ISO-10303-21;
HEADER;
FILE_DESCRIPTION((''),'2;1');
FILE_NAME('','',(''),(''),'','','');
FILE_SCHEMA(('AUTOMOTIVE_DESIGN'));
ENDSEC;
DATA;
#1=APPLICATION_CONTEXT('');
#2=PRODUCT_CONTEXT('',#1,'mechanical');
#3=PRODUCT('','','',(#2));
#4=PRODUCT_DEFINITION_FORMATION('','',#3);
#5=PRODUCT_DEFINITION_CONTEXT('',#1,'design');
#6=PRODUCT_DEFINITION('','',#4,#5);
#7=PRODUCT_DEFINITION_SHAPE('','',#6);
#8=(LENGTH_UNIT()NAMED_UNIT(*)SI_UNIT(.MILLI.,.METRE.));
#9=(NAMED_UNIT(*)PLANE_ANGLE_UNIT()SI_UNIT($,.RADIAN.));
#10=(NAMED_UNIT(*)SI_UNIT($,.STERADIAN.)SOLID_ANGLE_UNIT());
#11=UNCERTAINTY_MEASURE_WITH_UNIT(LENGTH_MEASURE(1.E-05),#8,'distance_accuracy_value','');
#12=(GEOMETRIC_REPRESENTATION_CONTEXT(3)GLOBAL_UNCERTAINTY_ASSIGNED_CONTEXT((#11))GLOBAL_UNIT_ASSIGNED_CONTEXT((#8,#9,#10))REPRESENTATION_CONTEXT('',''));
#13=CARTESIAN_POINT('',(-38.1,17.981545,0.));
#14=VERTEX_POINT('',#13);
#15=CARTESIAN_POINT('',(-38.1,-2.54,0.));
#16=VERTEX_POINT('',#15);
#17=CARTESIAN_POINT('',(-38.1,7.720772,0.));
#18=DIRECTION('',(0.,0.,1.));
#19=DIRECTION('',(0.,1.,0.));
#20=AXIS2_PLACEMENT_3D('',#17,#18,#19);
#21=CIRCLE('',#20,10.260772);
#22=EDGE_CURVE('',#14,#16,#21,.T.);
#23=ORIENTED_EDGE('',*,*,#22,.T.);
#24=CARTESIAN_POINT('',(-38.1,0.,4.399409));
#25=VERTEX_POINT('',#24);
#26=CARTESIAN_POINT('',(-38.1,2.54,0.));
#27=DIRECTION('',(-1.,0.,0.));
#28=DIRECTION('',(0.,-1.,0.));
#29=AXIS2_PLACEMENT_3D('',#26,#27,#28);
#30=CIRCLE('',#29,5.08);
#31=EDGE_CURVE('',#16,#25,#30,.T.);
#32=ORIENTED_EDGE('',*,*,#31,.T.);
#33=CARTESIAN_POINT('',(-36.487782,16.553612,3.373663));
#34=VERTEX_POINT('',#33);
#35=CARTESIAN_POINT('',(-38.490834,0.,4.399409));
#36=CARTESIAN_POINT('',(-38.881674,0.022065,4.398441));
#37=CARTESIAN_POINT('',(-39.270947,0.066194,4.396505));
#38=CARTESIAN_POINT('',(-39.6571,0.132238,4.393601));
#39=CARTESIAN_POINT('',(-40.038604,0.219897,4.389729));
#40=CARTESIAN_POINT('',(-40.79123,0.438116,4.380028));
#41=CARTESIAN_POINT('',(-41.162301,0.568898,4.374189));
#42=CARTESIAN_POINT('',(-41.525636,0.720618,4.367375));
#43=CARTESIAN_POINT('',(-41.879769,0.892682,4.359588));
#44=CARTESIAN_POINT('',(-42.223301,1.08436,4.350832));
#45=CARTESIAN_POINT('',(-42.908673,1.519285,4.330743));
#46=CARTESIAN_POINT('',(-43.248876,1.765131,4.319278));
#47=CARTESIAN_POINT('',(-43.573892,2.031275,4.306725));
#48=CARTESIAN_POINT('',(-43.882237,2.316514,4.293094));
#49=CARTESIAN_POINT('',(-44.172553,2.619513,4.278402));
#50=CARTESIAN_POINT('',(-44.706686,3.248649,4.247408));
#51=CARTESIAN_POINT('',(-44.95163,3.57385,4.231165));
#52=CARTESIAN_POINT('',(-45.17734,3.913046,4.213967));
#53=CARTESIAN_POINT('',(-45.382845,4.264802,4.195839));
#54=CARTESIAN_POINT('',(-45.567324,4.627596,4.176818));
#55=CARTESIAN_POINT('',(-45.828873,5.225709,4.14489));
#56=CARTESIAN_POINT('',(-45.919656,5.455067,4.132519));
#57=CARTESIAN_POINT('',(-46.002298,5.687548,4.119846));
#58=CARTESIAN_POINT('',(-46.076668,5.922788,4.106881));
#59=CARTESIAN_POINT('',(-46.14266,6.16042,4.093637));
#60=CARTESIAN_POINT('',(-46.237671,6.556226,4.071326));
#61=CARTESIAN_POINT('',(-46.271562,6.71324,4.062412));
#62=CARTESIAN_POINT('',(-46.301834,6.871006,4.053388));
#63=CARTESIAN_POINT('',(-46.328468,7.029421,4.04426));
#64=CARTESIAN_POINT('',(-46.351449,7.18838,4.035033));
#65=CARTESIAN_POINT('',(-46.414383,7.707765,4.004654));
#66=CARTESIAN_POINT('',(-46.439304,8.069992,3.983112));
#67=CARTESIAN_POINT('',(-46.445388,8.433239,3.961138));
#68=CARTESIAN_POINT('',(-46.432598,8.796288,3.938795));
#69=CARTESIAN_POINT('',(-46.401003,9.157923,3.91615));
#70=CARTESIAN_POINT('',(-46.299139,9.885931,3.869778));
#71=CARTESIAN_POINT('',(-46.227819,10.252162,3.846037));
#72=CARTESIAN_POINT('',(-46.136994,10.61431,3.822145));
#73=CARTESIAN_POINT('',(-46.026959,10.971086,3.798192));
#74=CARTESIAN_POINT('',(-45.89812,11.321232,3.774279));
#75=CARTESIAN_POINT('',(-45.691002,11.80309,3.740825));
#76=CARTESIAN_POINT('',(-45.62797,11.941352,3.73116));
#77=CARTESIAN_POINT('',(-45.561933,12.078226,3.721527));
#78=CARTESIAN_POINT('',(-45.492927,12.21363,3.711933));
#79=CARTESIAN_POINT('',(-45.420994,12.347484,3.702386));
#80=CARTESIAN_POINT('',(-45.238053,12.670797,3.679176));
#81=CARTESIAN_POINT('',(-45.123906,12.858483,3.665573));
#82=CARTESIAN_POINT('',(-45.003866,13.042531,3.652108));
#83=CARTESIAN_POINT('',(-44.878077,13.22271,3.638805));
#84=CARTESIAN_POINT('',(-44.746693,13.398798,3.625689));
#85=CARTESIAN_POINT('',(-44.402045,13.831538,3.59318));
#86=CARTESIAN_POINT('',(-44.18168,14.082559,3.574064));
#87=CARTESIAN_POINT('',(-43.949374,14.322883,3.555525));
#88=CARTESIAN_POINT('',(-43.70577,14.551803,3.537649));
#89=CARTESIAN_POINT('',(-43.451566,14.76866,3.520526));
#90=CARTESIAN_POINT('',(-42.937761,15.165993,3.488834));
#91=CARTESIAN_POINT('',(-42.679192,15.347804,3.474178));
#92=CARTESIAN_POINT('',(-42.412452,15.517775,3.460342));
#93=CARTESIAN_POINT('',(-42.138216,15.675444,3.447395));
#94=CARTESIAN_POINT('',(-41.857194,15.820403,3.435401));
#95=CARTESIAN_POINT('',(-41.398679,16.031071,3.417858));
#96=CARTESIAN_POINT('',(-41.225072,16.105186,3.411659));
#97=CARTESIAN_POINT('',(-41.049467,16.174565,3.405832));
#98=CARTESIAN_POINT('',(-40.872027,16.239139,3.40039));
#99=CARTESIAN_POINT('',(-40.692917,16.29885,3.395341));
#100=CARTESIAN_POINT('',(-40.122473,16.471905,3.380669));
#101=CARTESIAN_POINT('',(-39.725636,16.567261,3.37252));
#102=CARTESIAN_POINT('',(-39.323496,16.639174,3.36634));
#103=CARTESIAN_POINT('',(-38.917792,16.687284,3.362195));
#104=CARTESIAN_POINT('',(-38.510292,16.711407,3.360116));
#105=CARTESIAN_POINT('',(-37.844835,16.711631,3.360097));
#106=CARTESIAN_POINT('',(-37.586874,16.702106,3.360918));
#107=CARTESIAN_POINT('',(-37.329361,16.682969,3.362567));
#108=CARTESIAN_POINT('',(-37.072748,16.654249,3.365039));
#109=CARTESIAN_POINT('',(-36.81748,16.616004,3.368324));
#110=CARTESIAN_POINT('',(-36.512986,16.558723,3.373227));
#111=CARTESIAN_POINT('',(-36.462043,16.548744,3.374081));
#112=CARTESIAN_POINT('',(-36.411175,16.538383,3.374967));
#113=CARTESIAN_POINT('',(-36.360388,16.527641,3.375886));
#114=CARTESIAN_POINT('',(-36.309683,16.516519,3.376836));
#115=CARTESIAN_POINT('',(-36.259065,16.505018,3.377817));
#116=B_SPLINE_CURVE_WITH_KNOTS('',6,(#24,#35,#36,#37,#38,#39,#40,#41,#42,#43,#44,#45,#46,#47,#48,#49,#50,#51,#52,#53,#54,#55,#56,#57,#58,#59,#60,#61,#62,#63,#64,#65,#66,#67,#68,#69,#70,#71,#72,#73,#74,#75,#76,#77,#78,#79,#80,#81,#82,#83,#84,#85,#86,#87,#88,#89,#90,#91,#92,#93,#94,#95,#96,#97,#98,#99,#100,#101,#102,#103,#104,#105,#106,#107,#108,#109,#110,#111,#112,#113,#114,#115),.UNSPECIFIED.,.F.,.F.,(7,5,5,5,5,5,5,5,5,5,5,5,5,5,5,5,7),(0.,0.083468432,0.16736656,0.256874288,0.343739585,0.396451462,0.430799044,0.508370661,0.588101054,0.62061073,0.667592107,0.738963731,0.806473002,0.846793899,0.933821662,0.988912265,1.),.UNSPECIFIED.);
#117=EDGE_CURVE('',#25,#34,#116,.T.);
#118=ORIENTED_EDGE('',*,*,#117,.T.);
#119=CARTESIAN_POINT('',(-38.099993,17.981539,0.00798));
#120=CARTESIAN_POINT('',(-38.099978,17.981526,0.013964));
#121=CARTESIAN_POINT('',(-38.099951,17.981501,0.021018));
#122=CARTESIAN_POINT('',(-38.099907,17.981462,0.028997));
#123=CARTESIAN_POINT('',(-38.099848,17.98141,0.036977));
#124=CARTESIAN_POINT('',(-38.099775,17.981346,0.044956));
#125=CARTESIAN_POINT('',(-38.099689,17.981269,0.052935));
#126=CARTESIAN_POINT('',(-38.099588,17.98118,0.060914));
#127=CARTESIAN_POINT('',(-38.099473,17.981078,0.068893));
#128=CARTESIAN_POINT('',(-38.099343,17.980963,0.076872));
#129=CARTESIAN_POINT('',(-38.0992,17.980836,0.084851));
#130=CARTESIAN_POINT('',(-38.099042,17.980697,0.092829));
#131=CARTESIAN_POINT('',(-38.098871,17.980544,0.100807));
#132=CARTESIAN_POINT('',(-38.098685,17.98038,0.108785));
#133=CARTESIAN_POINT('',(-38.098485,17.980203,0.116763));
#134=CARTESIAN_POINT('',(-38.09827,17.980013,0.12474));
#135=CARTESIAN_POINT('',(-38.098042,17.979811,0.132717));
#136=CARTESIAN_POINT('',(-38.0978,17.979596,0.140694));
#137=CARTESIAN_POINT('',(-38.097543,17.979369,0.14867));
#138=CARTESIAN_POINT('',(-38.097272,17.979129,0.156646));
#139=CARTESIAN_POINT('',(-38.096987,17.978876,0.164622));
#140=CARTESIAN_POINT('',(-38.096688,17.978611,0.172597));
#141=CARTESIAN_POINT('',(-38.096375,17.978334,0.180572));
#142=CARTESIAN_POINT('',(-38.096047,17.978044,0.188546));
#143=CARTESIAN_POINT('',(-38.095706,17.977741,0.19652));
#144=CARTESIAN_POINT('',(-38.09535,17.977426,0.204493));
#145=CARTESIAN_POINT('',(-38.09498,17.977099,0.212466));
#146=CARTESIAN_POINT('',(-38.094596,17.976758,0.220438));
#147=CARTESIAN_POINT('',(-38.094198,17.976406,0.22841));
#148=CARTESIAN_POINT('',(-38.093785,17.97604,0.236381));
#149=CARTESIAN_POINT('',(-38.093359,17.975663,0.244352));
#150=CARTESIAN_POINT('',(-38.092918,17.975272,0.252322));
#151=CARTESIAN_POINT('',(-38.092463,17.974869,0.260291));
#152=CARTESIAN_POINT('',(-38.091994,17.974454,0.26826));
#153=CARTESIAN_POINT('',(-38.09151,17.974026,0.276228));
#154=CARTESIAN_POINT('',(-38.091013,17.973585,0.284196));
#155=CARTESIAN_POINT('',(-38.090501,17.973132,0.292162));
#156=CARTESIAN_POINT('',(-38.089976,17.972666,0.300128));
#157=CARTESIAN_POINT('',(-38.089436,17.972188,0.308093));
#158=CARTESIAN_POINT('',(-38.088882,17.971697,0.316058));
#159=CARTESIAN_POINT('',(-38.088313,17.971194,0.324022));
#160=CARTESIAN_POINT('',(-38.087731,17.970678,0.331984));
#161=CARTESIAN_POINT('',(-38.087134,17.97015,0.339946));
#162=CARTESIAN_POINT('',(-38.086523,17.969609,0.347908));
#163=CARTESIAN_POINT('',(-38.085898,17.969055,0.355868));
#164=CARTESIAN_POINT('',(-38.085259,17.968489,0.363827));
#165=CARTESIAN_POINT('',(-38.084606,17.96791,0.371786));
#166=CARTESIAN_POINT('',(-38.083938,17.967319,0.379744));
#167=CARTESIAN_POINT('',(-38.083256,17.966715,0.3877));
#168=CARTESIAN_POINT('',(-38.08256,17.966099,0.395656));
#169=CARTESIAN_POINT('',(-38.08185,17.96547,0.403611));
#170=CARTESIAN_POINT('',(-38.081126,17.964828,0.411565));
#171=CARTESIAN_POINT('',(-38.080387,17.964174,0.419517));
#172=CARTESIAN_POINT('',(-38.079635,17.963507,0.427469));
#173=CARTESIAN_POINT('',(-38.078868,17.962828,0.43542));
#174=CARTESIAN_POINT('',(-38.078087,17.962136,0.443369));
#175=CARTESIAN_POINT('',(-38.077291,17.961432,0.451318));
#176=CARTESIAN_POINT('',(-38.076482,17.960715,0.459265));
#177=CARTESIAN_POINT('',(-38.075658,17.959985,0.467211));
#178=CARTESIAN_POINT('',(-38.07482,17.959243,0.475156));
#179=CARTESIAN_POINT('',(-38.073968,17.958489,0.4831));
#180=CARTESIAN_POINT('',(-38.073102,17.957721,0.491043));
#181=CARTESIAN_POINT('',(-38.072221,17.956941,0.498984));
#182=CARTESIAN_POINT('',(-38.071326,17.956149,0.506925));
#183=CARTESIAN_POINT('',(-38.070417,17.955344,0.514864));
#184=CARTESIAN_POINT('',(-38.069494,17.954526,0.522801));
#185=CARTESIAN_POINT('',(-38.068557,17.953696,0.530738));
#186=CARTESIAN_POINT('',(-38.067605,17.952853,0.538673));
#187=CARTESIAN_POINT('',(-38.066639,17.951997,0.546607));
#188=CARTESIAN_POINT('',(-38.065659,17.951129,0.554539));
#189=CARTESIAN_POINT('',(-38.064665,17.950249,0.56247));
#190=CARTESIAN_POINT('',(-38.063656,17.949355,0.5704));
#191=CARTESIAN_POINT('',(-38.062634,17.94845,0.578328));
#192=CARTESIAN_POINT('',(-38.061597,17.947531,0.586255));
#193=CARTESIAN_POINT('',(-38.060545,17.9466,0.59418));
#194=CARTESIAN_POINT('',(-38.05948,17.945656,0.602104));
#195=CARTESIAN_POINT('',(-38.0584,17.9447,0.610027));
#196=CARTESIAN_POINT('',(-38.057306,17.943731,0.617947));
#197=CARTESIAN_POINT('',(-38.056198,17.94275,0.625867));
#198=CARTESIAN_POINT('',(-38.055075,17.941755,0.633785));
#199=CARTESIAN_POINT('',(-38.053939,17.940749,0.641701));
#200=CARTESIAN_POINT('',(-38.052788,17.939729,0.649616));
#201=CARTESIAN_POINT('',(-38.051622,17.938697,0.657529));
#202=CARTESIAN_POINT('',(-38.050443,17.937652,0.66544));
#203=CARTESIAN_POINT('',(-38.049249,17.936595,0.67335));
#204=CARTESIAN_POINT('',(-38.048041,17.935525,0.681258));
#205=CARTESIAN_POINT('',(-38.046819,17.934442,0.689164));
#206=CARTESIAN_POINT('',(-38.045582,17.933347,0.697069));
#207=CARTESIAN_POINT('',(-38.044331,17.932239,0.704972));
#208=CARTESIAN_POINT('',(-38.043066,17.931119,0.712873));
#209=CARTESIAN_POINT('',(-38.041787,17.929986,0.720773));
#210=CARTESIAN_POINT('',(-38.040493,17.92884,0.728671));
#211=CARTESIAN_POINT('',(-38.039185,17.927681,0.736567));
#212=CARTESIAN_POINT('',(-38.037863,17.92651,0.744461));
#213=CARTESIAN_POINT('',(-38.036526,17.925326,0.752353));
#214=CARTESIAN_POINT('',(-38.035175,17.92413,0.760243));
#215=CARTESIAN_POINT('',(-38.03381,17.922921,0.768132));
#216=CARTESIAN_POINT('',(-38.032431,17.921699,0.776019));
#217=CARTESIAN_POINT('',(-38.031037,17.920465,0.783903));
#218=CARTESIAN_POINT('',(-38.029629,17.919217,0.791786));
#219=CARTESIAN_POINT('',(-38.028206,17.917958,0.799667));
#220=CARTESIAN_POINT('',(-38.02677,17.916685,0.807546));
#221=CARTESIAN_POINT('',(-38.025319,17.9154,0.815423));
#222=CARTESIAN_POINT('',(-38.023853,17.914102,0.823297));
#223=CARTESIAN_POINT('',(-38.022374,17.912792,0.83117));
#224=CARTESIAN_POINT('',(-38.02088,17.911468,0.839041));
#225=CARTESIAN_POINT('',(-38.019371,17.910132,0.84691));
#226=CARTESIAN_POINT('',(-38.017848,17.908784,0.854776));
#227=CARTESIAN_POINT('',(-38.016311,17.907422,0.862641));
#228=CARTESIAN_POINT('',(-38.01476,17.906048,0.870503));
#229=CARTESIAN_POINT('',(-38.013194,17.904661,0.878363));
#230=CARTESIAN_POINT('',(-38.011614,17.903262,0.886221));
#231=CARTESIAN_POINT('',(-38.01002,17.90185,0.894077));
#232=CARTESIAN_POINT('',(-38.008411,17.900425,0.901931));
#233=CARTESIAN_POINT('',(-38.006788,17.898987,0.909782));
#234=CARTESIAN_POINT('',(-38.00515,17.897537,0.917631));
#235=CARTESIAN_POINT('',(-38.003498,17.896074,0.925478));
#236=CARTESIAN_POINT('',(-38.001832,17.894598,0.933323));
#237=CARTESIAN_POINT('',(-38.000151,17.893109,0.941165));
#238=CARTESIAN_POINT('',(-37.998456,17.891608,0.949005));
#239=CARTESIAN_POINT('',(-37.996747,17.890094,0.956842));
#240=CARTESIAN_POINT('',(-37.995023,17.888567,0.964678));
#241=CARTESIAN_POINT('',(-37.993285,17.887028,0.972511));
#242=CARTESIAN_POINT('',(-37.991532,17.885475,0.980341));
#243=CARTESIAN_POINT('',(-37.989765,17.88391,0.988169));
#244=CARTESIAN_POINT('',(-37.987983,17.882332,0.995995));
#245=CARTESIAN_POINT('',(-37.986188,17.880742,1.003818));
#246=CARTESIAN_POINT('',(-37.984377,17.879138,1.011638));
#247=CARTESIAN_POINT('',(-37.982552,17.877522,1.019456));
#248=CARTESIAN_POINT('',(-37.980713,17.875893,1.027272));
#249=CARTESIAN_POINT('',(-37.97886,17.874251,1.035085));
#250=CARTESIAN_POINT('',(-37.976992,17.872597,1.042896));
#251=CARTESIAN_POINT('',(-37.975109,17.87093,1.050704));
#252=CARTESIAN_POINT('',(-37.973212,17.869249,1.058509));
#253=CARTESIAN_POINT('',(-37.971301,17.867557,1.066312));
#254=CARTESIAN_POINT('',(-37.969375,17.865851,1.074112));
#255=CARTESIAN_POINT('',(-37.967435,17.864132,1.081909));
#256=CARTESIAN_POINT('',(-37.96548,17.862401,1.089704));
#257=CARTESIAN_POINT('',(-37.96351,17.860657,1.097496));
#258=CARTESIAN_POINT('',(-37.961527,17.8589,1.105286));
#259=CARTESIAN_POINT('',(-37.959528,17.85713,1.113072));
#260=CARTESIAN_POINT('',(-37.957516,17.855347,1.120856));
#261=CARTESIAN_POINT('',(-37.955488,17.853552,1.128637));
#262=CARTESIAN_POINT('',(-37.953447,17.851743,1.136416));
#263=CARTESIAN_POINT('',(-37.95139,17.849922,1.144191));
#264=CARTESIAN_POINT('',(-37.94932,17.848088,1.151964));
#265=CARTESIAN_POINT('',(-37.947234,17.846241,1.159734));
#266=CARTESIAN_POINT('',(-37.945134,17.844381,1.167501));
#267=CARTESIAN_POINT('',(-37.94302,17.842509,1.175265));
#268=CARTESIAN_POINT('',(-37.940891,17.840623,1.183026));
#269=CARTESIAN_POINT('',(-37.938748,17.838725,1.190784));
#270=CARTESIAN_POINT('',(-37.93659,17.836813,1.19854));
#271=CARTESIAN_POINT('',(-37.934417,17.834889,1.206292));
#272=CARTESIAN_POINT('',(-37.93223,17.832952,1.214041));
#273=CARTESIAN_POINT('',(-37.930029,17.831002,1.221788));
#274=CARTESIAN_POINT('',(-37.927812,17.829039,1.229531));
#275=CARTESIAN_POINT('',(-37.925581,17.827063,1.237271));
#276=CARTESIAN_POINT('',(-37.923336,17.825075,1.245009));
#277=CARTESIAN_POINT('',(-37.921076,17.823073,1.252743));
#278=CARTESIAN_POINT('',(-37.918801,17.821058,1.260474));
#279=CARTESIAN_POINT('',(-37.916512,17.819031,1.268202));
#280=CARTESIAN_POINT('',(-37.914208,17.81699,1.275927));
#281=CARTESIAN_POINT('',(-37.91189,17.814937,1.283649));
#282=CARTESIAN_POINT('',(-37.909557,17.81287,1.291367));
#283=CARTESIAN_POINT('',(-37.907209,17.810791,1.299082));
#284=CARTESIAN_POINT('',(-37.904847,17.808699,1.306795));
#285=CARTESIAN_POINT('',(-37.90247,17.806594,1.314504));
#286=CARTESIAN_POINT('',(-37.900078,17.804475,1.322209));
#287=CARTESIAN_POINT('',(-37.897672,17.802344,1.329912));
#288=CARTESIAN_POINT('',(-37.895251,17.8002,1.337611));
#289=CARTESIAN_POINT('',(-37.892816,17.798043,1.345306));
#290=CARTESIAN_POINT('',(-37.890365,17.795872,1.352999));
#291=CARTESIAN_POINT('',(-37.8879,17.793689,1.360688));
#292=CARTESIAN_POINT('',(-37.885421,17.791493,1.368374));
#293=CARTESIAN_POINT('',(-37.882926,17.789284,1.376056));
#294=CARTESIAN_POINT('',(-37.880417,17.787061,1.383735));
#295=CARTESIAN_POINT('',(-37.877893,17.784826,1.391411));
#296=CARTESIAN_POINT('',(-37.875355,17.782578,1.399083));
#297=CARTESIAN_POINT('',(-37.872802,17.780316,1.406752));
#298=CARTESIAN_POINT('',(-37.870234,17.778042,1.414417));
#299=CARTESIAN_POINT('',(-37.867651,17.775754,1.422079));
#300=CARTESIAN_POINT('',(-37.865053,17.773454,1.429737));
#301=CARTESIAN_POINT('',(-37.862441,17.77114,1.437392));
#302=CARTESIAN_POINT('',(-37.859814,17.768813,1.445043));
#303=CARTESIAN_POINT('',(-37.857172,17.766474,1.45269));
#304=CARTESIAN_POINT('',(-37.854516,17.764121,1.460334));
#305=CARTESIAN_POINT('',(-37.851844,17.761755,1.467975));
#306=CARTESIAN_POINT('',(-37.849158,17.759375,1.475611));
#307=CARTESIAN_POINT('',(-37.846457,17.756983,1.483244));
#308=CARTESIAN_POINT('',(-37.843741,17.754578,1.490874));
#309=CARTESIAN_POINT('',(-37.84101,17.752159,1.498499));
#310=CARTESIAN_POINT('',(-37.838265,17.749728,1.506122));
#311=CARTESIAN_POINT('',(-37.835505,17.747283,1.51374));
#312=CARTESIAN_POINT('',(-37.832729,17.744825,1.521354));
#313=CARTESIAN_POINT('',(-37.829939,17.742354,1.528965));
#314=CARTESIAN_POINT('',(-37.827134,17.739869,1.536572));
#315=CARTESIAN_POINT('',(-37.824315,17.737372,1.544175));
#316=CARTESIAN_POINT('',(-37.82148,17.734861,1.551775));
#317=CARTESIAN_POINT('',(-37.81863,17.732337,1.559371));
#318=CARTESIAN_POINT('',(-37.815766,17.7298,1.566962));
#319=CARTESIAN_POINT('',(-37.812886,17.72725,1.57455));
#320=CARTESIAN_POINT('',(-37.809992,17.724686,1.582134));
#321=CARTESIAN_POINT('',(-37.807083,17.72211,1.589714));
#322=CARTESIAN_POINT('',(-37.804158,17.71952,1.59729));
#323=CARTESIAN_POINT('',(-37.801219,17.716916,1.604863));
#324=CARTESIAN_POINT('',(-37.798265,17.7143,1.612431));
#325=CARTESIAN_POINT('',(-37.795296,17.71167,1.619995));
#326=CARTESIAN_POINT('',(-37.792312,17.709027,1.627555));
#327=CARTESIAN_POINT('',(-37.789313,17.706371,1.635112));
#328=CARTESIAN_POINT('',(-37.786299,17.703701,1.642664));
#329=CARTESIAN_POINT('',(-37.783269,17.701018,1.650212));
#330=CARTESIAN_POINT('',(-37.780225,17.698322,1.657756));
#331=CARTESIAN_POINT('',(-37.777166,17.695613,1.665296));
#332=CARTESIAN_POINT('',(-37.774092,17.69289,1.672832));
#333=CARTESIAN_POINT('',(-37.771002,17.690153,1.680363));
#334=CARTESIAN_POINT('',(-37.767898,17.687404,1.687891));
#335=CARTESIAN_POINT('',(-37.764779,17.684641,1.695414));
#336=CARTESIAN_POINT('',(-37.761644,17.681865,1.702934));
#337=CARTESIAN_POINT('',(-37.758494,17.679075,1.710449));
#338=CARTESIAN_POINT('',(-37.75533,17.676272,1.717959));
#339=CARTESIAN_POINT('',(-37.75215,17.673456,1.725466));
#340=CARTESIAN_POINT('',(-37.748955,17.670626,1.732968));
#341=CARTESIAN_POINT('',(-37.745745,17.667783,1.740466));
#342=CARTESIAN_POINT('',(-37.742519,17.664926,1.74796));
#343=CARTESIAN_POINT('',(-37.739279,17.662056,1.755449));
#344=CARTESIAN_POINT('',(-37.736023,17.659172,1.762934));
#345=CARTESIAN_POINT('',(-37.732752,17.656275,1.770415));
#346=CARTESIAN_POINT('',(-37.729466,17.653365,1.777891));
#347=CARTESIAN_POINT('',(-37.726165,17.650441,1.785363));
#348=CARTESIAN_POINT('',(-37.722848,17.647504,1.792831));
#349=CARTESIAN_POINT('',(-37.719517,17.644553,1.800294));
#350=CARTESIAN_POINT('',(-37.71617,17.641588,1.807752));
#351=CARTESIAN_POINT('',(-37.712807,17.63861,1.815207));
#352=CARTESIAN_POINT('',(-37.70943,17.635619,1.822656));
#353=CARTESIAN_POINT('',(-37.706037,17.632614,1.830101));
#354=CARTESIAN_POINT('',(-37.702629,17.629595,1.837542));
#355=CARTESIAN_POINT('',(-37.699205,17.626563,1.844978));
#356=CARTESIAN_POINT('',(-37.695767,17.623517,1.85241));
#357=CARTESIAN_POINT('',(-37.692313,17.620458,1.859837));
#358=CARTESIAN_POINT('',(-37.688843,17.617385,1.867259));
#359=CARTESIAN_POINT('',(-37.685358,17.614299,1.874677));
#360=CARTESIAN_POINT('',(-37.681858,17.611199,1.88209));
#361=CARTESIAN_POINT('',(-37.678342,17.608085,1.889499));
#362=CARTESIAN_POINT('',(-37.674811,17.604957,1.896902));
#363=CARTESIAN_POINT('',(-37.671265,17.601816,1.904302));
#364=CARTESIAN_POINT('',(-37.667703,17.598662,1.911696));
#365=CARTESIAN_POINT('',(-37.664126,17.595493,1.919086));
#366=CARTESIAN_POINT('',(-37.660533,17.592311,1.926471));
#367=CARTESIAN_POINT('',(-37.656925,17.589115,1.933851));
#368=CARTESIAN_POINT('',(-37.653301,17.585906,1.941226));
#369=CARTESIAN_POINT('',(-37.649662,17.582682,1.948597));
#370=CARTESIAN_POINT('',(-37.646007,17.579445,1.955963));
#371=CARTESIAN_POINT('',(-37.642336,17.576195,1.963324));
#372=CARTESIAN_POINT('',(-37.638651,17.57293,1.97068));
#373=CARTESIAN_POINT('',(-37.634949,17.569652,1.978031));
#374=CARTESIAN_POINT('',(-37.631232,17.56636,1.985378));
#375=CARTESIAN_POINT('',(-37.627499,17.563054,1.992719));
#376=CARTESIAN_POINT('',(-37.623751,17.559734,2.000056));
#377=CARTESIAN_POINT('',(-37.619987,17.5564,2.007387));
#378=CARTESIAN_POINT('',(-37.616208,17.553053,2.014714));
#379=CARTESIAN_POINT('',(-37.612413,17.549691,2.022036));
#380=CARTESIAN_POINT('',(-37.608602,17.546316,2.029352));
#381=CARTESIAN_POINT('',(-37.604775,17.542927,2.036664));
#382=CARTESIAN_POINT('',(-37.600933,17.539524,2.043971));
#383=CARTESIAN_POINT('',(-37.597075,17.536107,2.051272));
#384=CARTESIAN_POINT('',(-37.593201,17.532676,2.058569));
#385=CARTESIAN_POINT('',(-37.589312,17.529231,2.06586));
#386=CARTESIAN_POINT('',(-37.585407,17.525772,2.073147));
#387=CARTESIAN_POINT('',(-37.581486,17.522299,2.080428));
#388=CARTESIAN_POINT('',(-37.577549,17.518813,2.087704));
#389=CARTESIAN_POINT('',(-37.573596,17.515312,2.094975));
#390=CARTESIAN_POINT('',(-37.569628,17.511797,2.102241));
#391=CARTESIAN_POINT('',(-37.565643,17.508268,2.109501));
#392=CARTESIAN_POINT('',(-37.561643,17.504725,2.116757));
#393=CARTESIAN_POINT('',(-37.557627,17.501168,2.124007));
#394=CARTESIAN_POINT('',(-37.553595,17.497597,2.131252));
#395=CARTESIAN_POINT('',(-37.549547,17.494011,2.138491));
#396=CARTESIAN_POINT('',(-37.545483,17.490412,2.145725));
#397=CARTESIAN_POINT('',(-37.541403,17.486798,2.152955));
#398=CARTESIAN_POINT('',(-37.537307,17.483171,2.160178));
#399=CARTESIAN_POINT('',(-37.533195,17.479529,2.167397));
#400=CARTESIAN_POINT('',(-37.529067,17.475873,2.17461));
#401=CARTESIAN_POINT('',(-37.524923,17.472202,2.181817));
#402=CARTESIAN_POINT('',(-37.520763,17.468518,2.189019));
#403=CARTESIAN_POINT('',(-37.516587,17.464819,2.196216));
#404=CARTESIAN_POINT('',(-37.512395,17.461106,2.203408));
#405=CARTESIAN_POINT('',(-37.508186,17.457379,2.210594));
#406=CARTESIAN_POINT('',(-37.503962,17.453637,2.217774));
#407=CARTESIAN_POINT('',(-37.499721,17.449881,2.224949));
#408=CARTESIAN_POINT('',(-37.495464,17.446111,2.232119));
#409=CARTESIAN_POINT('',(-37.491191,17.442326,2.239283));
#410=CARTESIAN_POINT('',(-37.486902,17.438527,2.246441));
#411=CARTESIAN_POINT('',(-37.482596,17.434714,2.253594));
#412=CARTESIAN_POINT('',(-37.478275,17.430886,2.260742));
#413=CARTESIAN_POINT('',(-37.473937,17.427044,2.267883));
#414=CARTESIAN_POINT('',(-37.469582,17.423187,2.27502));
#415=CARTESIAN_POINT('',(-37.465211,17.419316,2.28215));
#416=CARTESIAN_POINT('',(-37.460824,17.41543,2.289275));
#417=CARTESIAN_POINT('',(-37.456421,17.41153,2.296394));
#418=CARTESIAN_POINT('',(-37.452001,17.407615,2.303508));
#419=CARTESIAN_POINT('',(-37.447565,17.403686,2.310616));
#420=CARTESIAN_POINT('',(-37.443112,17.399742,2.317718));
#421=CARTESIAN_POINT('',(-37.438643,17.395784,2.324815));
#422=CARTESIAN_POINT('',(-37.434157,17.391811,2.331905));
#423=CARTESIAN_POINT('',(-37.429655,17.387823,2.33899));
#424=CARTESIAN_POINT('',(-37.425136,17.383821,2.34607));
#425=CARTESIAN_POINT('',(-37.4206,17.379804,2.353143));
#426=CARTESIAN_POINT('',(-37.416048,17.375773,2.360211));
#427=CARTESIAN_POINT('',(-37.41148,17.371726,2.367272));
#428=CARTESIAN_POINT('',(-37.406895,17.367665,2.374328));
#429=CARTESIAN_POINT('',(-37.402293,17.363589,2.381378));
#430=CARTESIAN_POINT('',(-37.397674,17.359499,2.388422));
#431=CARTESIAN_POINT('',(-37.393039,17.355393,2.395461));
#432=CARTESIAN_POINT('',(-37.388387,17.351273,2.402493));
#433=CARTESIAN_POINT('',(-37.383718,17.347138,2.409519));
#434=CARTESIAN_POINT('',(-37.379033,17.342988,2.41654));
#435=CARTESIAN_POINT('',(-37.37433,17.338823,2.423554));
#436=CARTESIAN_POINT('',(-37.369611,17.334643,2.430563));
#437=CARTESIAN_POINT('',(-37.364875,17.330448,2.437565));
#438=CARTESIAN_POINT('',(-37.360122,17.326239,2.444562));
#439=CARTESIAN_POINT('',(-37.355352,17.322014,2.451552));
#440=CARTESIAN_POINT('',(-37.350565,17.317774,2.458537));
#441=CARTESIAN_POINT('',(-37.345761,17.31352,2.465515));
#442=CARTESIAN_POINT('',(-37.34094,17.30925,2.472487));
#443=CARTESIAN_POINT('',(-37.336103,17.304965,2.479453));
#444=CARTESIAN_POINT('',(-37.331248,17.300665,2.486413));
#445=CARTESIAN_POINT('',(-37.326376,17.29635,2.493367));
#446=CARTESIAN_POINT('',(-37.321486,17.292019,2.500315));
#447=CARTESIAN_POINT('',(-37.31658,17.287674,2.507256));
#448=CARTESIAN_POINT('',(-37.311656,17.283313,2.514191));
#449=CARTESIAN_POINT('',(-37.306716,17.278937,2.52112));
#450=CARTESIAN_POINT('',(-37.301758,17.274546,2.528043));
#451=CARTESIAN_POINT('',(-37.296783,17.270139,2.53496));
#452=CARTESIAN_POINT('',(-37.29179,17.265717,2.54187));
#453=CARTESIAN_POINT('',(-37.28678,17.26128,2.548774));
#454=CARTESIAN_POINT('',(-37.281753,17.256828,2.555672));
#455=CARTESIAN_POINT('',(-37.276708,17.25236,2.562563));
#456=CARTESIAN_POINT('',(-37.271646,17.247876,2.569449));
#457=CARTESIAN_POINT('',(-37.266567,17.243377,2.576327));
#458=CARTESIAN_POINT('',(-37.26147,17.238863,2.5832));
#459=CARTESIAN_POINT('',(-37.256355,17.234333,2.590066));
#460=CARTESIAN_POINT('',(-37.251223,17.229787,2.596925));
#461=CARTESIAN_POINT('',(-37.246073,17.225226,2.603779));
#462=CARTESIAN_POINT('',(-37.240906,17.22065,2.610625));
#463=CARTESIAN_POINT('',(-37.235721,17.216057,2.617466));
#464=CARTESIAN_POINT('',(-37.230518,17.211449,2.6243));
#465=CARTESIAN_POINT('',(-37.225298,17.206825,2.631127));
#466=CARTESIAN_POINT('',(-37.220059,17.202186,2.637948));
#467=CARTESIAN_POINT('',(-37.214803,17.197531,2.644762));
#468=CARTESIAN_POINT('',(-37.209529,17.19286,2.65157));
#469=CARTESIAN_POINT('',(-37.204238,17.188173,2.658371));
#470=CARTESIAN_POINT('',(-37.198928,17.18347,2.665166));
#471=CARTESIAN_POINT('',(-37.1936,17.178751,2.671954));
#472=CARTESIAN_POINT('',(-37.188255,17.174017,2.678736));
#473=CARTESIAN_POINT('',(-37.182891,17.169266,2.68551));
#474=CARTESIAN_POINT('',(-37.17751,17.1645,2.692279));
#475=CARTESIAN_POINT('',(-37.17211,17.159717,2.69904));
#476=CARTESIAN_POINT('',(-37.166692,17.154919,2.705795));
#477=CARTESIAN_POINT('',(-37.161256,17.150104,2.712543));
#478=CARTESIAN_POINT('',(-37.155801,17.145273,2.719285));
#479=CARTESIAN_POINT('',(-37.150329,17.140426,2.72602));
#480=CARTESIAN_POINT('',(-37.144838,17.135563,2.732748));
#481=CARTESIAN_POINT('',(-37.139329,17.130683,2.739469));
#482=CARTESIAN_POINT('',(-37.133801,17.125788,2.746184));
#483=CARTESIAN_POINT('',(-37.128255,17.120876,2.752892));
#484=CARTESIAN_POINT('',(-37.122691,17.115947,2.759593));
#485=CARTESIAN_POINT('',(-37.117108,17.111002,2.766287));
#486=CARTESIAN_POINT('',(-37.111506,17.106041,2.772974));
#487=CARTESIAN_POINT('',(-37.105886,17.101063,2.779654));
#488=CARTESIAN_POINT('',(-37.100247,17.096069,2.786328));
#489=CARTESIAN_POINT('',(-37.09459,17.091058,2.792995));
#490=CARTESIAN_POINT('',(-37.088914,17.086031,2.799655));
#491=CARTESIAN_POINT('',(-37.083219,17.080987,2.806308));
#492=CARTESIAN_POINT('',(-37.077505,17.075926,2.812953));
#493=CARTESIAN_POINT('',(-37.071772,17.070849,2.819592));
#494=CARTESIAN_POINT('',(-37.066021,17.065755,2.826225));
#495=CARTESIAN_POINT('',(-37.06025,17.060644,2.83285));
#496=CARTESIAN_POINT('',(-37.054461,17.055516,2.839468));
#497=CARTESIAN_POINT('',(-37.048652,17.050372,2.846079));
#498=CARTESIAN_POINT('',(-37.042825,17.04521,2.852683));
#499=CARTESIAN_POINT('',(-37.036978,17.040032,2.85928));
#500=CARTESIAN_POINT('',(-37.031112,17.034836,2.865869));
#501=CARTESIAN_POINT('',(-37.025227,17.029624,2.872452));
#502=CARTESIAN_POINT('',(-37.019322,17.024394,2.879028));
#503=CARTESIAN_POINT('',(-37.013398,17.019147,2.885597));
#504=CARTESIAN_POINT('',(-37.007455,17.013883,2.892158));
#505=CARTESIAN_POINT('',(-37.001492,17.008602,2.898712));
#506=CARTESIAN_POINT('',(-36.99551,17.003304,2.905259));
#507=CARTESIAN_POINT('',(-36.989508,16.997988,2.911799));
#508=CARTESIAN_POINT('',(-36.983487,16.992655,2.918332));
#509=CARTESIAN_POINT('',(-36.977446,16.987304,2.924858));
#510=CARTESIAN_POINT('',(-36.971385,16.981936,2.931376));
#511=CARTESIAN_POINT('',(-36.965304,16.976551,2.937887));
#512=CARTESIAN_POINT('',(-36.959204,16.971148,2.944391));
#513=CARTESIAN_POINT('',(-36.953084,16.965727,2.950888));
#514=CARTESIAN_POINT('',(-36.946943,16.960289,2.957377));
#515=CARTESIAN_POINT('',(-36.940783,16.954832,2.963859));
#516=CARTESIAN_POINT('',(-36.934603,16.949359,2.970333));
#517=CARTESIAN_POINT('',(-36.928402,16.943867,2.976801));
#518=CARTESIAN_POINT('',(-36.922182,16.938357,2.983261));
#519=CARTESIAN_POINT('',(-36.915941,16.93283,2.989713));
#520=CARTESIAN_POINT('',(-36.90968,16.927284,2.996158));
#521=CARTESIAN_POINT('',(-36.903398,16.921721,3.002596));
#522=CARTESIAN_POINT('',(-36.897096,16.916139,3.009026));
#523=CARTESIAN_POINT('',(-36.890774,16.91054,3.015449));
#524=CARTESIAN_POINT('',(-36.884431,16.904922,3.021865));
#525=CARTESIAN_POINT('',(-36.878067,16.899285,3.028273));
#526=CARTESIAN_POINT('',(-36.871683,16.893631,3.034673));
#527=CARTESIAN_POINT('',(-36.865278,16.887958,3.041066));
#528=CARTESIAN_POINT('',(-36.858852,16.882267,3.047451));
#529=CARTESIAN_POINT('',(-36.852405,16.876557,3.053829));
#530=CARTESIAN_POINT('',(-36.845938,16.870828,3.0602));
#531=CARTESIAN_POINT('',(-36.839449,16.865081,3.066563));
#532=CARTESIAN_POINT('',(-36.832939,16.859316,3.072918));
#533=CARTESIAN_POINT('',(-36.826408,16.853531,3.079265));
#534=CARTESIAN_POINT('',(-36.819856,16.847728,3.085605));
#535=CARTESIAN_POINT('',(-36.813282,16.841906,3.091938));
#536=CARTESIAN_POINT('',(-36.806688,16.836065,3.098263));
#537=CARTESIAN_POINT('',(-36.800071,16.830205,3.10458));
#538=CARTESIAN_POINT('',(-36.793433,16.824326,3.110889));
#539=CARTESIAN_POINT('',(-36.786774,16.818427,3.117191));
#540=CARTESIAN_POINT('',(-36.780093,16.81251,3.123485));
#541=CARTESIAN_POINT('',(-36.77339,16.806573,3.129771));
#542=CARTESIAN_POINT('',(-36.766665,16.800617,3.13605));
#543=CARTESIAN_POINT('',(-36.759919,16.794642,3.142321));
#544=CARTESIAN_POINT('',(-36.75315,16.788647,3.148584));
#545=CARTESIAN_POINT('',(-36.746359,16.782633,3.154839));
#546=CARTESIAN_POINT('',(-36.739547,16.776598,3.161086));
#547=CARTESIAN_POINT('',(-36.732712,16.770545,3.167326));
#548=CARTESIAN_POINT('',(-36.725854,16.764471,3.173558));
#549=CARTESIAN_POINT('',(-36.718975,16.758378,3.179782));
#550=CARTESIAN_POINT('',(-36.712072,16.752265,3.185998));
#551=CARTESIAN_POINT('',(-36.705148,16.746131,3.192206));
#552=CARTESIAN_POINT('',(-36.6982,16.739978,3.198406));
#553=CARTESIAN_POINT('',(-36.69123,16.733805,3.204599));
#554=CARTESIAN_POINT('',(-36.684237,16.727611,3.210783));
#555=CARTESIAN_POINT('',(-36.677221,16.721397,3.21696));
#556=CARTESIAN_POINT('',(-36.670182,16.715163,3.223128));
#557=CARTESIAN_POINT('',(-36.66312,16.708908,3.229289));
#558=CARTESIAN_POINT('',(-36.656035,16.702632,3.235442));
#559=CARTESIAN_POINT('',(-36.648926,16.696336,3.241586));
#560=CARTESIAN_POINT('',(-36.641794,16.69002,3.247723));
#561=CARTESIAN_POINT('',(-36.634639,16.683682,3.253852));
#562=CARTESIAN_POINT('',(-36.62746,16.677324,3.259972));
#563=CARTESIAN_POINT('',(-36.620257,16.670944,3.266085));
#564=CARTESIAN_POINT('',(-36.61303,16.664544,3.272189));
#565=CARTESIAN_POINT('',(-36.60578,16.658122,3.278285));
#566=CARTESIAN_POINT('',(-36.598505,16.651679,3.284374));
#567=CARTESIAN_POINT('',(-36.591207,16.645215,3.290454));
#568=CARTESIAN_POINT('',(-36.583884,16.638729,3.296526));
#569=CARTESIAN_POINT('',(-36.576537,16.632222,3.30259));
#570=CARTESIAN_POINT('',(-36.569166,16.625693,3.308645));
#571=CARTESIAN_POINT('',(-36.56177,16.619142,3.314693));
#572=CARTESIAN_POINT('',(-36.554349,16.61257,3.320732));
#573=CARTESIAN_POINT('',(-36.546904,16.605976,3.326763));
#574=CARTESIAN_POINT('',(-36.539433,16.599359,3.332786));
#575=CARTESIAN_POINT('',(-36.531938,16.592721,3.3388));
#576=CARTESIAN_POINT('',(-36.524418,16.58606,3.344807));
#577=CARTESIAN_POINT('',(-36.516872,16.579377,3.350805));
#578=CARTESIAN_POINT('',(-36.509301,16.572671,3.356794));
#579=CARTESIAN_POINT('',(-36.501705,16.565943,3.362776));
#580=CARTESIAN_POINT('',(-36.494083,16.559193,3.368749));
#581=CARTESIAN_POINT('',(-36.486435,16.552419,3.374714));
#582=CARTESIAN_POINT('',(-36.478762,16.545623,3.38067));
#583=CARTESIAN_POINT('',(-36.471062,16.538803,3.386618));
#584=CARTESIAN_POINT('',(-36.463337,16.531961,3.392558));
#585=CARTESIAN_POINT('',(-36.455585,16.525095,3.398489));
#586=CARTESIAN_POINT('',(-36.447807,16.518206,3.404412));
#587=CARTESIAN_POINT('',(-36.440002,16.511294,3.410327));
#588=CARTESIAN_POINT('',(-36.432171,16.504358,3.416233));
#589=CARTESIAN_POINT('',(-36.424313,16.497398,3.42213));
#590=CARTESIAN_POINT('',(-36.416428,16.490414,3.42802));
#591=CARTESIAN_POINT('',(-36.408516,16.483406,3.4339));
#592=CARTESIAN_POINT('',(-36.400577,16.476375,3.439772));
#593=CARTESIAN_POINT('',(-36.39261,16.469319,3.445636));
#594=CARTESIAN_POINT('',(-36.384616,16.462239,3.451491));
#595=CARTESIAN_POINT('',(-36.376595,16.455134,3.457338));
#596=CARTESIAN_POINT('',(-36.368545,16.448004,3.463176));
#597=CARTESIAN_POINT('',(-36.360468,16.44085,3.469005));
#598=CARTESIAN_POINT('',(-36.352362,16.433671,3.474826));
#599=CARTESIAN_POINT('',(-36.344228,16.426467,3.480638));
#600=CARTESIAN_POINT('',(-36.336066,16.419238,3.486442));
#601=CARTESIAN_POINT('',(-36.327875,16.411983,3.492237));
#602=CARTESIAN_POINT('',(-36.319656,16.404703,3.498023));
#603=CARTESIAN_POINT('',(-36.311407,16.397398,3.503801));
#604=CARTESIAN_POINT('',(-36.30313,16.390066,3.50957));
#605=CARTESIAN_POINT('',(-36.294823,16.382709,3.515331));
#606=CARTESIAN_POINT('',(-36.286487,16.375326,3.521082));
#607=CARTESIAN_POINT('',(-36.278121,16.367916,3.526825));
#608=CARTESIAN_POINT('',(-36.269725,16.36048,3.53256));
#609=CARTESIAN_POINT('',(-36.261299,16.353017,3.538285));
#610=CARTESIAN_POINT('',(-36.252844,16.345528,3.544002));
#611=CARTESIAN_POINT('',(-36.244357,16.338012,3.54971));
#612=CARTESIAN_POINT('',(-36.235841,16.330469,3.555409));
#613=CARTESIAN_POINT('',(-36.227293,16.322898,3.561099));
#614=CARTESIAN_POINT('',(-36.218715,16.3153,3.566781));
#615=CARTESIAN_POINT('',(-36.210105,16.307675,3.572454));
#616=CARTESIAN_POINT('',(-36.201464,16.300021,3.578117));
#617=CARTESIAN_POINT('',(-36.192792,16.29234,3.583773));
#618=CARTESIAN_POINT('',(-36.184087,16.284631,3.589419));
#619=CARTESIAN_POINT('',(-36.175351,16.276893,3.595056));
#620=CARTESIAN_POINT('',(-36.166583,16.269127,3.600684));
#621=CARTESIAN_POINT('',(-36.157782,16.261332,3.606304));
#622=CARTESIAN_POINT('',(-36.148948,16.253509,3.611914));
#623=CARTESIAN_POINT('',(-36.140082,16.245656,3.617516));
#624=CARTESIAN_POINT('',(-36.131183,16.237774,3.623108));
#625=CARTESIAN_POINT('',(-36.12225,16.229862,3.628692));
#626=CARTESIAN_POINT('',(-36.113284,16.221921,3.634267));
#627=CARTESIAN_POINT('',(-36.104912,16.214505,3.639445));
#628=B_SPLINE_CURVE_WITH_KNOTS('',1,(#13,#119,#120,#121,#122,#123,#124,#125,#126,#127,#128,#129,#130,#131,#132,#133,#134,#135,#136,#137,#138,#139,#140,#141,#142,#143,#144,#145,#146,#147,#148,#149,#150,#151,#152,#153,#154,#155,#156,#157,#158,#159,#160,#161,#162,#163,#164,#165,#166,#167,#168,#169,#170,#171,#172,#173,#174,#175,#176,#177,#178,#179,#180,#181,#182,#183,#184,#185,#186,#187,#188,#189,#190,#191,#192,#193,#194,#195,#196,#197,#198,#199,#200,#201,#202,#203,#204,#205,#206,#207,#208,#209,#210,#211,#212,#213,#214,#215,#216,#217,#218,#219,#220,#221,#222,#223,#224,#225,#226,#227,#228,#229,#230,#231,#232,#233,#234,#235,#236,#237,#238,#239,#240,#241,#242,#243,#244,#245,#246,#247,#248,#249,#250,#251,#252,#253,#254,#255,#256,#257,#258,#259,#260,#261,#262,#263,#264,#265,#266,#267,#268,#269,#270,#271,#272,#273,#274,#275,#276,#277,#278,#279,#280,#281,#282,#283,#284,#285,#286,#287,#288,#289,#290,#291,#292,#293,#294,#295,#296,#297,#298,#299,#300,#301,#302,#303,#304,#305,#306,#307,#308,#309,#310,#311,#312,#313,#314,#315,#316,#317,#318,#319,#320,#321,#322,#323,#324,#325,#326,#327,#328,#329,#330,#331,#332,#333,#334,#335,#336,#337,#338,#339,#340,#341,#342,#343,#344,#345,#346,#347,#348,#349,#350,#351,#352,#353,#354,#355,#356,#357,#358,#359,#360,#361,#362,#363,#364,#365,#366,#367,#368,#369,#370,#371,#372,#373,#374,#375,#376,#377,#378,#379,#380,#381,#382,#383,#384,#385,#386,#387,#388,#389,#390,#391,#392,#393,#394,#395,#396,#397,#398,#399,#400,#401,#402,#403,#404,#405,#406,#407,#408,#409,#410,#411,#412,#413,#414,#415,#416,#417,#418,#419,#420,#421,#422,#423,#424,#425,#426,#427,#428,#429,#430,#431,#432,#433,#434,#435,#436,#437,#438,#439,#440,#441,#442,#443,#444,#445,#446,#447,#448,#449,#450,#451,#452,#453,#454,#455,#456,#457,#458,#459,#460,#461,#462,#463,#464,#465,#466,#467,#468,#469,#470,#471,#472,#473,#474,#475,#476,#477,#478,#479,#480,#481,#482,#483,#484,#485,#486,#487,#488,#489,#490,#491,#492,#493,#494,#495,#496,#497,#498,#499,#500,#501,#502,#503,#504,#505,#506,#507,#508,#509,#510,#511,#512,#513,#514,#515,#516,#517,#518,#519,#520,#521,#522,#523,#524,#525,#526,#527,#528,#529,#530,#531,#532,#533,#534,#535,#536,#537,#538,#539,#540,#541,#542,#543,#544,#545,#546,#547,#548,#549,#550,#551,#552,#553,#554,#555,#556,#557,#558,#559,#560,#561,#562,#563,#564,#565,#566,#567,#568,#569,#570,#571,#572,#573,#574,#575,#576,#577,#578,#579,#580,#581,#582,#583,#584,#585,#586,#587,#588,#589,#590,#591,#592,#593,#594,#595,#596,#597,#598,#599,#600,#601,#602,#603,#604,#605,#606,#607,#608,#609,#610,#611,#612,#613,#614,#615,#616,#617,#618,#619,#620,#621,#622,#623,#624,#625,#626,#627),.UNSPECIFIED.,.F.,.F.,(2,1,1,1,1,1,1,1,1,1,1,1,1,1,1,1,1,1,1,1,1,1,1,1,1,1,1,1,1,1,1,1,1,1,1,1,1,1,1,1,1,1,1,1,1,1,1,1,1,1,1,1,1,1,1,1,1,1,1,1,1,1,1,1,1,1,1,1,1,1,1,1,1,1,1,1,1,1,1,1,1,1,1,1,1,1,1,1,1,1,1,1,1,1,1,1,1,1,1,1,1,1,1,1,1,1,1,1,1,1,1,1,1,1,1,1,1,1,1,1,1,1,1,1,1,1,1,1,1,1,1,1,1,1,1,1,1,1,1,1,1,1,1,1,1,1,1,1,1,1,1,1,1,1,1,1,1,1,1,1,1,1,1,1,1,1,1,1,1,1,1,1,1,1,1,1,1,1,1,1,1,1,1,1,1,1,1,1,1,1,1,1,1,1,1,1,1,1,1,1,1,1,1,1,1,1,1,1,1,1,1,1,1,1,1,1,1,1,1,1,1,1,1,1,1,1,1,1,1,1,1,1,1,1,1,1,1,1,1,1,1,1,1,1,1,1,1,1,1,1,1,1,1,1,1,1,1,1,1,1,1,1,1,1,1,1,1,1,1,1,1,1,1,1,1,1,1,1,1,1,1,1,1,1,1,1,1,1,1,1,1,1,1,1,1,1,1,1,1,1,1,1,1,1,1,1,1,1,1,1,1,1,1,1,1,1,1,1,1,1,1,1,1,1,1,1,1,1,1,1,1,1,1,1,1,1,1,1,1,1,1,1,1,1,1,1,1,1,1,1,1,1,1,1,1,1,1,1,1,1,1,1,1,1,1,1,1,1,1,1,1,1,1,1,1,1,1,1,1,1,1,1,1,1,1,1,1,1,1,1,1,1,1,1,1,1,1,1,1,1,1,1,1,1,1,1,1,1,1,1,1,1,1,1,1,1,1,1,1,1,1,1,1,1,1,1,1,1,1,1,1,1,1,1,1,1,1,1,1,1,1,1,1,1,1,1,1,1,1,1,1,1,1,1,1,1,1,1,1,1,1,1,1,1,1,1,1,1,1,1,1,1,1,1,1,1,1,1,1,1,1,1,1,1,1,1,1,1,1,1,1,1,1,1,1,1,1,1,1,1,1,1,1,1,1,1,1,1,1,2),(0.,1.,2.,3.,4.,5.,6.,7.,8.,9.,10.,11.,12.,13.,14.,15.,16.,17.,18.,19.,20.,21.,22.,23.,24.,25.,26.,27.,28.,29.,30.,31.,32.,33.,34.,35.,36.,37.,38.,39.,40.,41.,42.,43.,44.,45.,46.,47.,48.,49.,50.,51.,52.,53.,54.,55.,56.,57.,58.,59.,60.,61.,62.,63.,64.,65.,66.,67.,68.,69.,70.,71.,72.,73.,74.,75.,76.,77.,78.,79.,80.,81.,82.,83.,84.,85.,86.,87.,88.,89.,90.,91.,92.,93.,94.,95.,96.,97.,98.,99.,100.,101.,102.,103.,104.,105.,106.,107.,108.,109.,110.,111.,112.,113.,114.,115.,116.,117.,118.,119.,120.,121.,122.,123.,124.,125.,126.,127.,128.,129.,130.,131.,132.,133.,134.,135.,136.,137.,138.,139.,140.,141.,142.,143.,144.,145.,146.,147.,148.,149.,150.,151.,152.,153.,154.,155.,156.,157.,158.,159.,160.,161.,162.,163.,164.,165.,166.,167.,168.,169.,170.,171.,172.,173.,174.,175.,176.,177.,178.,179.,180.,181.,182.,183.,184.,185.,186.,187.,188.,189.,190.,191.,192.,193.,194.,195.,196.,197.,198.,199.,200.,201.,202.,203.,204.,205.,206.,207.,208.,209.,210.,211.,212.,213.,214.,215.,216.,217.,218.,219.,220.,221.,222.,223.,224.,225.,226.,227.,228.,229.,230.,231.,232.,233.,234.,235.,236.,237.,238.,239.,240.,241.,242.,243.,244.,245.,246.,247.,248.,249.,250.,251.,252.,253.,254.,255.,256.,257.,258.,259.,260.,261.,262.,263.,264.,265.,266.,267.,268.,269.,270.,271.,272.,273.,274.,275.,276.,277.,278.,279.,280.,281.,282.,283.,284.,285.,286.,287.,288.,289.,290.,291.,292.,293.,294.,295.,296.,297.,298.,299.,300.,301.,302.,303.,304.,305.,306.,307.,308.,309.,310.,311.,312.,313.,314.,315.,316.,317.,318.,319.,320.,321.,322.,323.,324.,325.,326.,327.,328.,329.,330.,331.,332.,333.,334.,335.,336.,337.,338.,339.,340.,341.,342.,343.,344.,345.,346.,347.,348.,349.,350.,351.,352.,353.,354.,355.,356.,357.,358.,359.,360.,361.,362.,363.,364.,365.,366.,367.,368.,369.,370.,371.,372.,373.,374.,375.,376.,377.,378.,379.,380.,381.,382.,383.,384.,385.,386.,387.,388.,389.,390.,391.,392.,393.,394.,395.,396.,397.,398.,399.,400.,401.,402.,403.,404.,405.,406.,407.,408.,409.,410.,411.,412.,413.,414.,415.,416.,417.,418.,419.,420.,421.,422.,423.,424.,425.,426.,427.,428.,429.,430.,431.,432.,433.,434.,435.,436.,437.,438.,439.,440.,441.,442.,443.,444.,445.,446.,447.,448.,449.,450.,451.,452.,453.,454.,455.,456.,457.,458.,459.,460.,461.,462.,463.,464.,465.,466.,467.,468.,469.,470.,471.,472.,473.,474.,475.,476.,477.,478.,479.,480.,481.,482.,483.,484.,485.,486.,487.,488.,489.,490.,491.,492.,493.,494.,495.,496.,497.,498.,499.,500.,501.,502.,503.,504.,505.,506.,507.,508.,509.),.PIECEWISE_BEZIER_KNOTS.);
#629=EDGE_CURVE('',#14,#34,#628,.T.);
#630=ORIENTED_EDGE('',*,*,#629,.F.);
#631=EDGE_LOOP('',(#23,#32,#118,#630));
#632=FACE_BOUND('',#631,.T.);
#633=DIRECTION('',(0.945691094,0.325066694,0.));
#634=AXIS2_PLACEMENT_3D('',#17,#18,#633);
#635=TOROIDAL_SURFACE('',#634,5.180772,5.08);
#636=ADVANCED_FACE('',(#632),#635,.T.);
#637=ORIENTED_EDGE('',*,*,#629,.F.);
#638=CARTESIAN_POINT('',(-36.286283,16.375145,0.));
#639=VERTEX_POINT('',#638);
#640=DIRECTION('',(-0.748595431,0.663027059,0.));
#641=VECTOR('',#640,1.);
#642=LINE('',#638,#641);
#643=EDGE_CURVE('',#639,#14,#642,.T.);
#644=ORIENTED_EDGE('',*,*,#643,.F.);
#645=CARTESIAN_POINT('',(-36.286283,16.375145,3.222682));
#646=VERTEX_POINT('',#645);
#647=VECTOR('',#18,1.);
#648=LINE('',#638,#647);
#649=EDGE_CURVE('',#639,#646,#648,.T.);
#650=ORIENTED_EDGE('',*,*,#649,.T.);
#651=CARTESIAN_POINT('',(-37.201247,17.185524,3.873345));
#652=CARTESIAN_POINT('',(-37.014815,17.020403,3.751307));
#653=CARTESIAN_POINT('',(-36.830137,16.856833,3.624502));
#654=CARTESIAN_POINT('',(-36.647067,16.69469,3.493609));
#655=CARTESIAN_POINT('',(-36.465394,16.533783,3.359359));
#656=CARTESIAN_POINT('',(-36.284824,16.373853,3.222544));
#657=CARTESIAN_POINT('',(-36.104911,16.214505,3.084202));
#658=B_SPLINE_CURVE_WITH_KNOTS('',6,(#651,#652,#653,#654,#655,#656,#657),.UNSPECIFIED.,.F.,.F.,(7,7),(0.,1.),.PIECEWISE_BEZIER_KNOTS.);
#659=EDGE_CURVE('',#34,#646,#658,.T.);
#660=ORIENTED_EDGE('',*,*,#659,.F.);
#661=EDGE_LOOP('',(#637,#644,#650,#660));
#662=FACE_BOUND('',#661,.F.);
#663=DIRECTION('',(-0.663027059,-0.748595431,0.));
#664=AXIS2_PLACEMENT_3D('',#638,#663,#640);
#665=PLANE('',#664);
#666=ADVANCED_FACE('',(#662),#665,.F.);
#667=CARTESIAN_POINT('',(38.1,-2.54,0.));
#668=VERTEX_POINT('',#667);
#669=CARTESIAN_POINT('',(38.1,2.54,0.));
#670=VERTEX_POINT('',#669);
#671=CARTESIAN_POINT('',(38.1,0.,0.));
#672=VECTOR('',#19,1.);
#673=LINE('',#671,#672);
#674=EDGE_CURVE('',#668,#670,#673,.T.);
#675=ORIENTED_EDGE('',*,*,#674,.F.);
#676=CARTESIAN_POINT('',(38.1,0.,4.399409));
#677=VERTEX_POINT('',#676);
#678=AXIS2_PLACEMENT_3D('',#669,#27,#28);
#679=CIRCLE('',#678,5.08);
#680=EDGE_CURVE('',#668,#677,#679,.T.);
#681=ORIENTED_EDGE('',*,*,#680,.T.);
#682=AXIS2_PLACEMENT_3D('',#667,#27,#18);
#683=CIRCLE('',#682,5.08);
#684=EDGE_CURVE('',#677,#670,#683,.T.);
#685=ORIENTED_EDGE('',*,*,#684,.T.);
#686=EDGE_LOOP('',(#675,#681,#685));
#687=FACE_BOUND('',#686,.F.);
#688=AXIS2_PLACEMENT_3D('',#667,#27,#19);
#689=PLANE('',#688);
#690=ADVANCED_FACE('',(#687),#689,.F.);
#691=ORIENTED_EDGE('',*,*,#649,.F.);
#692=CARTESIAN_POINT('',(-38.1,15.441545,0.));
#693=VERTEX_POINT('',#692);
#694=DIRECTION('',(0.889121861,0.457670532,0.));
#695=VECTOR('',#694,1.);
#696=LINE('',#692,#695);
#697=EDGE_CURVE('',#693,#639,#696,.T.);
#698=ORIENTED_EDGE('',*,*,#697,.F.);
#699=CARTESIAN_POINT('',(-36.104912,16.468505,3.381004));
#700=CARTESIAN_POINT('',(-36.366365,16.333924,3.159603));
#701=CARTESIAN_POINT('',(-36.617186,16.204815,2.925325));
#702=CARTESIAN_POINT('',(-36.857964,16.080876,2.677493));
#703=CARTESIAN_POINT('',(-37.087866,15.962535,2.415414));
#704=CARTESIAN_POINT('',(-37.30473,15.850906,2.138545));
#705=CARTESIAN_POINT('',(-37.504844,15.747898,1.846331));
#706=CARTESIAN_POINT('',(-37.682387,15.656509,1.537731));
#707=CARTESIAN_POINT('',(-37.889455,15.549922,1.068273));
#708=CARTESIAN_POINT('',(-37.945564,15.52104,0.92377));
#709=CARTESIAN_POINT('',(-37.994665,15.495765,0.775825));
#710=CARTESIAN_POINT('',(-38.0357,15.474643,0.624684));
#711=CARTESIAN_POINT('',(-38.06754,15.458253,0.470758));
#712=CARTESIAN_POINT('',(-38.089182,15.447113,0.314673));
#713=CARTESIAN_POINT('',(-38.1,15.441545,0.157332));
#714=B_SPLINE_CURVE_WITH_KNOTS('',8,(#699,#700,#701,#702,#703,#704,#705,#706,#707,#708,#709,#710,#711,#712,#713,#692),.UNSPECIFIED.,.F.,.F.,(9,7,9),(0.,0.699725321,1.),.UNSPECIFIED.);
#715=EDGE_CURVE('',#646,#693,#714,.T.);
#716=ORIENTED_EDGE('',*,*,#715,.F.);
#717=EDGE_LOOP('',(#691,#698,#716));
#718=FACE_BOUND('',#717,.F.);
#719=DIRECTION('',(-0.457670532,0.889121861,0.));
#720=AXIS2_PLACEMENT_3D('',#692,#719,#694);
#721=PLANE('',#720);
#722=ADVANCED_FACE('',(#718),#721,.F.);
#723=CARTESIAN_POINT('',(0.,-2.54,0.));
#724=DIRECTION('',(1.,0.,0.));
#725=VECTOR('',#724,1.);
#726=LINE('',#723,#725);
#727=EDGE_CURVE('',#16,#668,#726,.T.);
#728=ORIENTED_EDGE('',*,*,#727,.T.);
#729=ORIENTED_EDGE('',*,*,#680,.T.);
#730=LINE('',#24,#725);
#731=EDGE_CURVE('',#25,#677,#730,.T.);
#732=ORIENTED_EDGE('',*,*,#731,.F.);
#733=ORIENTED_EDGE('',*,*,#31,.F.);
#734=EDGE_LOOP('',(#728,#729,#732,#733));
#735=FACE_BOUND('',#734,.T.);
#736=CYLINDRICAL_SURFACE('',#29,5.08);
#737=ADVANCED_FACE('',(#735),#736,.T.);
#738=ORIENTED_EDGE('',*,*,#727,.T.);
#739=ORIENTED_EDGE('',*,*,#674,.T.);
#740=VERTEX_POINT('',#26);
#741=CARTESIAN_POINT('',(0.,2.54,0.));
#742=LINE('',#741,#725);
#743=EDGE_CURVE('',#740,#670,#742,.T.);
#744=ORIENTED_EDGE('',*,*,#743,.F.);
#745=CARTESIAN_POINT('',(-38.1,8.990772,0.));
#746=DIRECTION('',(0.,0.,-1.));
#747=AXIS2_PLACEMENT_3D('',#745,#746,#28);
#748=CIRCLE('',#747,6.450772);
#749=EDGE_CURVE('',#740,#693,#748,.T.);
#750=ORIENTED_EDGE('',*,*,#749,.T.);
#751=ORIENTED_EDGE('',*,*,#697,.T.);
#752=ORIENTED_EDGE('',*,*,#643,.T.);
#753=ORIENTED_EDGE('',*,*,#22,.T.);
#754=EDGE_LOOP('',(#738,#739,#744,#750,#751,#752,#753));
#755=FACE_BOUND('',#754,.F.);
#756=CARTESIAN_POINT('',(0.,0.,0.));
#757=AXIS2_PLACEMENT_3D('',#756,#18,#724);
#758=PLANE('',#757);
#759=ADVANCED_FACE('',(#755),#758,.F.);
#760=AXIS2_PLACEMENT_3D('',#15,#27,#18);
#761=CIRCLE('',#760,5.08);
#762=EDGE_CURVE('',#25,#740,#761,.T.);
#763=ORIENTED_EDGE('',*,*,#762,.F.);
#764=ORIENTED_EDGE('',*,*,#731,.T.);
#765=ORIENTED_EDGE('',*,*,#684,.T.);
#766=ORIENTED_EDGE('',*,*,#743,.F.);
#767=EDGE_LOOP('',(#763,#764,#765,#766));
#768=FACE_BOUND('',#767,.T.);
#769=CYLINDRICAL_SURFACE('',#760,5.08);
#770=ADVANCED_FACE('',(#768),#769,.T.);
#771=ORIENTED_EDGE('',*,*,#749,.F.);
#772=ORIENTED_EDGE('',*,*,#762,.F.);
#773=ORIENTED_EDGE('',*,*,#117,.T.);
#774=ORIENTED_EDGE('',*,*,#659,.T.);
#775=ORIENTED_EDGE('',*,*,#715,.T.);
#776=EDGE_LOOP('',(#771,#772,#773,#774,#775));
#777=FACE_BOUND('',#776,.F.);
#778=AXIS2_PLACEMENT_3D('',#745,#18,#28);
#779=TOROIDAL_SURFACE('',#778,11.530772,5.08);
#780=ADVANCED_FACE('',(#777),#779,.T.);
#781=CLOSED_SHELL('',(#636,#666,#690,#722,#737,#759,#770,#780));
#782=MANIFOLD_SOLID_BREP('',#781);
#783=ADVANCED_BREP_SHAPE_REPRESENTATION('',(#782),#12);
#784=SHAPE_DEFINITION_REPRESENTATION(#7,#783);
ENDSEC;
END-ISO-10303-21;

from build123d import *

# Parameters (mm, degrees)
F1_DEPTH    = 5.08
F0_W        = 76.2
F0_H        = 5.08
F2_DEPTH    = 5.08
F3_T1_DEPTH = 88.9
F3_T4_ANGLE = 251.0303843405
F3_T6_ANGLE = 292.9828431402


# Not quite as in the source:
# - a fillet or chamfer that OpenCascade refuses, or shapes differently, is made with other operations: its cross-section is extruded or revolved along the edge and cut away or added


with BuildPart() as f1:
    # F0 (on Top) → F1 (new body)
    with BuildSketch(Plane.XY):
        with BuildLine():
            Line((-38.1, -2.54), (-38.1, 2.54))
            ThreePointArc((-38.1, 2.54), (-44.5507724238, 8.9907724238), (-38.1, 15.4415448477))
            Line((-38.1, 15.4415448477), (-36.2862832844, 16.3751454373))
            Line((-36.2862832844, 16.3751454373), (-38.1, 17.9815448477))
            ThreePointArc((-38.1, 17.9815448477), (-48.3607724238, 7.7207724238), (-38.1, -2.54))
        make_face()
    extrude(amount=F1_DEPTH)

    # F0 (on Top) → F2 (join)
    with BuildSketch(Plane.XY):
        Rectangle(F0_W, F0_H)
    extrude(amount=F2_DEPTH)

    # F3: fillet of radius 5.08 on 2 edges, made by hand

    # F3_s2 → F3_t1 (cut)
    with BuildSketch(Plane.YZ.offset(-38.1)):
        with BuildLine():
            ThreePointArc((-2.54, 5.08), (1.0521024484, 3.5921024484), (2.54, 0))
            Line((2.54, 0), (2.54, 5.08))
            Line((2.54, 5.08), (-2.54, 5.08))
        make_face()
        with BuildLine():
            ThreePointArc((-2.54, 0), (-1.0521024484, 3.5921024484), (2.54, 5.08))
            Line((2.54, 5.08), (-2.54, 5.08))
            Line((-2.54, 5.08), (-2.54, 0))
        make_face()
    extrude(amount=F3_T1_DEPTH, mode=Mode.SUBTRACT)

    # F3_s3 → F3_t4 (revolve, cut)
    with BuildSketch(Plane(origin=(-6.3994276616, 18.6173540989, 0), x_dir=(0, 0, 1), z_dir=(0.3250666938, -0.9456910936, 0))):
        with BuildLine():
            ThreePointArc((0, 23.2602922785), (3.5921024484, 24.7481898301), (5.08, 28.3402922785))
            Line((5.08, 28.3402922785), (5.08, 23.2602922785))
            Line((5.08, 23.2602922785), (0, 23.2602922785))
        make_face()
    revolve(axis=Axis((-38.1, 7.7207724238, 5.08), (0, 0, 1)), revolution_arc=F3_T4_ANGLE, mode=Mode.SUBTRACT)

    # F3_s5 → F3_t6 (revolve, cut)
    with BuildSketch(Plane.YZ.offset(-38.1)):
        with BuildLine():
            ThreePointArc((-2.54, 5.08), (1.0521024484, 3.5921024484), (2.54, 0))
            Line((2.54, 0), (2.54, 5.08))
            Line((2.54, 5.08), (-2.54, 5.08))
        make_face()
    revolve(axis=Axis((-38.1, 8.9907724238, 5.08), (0, 0, -1)), revolution_arc=F3_T6_ANGLE, mode=Mode.SUBTRACT)


solid = f1.part
